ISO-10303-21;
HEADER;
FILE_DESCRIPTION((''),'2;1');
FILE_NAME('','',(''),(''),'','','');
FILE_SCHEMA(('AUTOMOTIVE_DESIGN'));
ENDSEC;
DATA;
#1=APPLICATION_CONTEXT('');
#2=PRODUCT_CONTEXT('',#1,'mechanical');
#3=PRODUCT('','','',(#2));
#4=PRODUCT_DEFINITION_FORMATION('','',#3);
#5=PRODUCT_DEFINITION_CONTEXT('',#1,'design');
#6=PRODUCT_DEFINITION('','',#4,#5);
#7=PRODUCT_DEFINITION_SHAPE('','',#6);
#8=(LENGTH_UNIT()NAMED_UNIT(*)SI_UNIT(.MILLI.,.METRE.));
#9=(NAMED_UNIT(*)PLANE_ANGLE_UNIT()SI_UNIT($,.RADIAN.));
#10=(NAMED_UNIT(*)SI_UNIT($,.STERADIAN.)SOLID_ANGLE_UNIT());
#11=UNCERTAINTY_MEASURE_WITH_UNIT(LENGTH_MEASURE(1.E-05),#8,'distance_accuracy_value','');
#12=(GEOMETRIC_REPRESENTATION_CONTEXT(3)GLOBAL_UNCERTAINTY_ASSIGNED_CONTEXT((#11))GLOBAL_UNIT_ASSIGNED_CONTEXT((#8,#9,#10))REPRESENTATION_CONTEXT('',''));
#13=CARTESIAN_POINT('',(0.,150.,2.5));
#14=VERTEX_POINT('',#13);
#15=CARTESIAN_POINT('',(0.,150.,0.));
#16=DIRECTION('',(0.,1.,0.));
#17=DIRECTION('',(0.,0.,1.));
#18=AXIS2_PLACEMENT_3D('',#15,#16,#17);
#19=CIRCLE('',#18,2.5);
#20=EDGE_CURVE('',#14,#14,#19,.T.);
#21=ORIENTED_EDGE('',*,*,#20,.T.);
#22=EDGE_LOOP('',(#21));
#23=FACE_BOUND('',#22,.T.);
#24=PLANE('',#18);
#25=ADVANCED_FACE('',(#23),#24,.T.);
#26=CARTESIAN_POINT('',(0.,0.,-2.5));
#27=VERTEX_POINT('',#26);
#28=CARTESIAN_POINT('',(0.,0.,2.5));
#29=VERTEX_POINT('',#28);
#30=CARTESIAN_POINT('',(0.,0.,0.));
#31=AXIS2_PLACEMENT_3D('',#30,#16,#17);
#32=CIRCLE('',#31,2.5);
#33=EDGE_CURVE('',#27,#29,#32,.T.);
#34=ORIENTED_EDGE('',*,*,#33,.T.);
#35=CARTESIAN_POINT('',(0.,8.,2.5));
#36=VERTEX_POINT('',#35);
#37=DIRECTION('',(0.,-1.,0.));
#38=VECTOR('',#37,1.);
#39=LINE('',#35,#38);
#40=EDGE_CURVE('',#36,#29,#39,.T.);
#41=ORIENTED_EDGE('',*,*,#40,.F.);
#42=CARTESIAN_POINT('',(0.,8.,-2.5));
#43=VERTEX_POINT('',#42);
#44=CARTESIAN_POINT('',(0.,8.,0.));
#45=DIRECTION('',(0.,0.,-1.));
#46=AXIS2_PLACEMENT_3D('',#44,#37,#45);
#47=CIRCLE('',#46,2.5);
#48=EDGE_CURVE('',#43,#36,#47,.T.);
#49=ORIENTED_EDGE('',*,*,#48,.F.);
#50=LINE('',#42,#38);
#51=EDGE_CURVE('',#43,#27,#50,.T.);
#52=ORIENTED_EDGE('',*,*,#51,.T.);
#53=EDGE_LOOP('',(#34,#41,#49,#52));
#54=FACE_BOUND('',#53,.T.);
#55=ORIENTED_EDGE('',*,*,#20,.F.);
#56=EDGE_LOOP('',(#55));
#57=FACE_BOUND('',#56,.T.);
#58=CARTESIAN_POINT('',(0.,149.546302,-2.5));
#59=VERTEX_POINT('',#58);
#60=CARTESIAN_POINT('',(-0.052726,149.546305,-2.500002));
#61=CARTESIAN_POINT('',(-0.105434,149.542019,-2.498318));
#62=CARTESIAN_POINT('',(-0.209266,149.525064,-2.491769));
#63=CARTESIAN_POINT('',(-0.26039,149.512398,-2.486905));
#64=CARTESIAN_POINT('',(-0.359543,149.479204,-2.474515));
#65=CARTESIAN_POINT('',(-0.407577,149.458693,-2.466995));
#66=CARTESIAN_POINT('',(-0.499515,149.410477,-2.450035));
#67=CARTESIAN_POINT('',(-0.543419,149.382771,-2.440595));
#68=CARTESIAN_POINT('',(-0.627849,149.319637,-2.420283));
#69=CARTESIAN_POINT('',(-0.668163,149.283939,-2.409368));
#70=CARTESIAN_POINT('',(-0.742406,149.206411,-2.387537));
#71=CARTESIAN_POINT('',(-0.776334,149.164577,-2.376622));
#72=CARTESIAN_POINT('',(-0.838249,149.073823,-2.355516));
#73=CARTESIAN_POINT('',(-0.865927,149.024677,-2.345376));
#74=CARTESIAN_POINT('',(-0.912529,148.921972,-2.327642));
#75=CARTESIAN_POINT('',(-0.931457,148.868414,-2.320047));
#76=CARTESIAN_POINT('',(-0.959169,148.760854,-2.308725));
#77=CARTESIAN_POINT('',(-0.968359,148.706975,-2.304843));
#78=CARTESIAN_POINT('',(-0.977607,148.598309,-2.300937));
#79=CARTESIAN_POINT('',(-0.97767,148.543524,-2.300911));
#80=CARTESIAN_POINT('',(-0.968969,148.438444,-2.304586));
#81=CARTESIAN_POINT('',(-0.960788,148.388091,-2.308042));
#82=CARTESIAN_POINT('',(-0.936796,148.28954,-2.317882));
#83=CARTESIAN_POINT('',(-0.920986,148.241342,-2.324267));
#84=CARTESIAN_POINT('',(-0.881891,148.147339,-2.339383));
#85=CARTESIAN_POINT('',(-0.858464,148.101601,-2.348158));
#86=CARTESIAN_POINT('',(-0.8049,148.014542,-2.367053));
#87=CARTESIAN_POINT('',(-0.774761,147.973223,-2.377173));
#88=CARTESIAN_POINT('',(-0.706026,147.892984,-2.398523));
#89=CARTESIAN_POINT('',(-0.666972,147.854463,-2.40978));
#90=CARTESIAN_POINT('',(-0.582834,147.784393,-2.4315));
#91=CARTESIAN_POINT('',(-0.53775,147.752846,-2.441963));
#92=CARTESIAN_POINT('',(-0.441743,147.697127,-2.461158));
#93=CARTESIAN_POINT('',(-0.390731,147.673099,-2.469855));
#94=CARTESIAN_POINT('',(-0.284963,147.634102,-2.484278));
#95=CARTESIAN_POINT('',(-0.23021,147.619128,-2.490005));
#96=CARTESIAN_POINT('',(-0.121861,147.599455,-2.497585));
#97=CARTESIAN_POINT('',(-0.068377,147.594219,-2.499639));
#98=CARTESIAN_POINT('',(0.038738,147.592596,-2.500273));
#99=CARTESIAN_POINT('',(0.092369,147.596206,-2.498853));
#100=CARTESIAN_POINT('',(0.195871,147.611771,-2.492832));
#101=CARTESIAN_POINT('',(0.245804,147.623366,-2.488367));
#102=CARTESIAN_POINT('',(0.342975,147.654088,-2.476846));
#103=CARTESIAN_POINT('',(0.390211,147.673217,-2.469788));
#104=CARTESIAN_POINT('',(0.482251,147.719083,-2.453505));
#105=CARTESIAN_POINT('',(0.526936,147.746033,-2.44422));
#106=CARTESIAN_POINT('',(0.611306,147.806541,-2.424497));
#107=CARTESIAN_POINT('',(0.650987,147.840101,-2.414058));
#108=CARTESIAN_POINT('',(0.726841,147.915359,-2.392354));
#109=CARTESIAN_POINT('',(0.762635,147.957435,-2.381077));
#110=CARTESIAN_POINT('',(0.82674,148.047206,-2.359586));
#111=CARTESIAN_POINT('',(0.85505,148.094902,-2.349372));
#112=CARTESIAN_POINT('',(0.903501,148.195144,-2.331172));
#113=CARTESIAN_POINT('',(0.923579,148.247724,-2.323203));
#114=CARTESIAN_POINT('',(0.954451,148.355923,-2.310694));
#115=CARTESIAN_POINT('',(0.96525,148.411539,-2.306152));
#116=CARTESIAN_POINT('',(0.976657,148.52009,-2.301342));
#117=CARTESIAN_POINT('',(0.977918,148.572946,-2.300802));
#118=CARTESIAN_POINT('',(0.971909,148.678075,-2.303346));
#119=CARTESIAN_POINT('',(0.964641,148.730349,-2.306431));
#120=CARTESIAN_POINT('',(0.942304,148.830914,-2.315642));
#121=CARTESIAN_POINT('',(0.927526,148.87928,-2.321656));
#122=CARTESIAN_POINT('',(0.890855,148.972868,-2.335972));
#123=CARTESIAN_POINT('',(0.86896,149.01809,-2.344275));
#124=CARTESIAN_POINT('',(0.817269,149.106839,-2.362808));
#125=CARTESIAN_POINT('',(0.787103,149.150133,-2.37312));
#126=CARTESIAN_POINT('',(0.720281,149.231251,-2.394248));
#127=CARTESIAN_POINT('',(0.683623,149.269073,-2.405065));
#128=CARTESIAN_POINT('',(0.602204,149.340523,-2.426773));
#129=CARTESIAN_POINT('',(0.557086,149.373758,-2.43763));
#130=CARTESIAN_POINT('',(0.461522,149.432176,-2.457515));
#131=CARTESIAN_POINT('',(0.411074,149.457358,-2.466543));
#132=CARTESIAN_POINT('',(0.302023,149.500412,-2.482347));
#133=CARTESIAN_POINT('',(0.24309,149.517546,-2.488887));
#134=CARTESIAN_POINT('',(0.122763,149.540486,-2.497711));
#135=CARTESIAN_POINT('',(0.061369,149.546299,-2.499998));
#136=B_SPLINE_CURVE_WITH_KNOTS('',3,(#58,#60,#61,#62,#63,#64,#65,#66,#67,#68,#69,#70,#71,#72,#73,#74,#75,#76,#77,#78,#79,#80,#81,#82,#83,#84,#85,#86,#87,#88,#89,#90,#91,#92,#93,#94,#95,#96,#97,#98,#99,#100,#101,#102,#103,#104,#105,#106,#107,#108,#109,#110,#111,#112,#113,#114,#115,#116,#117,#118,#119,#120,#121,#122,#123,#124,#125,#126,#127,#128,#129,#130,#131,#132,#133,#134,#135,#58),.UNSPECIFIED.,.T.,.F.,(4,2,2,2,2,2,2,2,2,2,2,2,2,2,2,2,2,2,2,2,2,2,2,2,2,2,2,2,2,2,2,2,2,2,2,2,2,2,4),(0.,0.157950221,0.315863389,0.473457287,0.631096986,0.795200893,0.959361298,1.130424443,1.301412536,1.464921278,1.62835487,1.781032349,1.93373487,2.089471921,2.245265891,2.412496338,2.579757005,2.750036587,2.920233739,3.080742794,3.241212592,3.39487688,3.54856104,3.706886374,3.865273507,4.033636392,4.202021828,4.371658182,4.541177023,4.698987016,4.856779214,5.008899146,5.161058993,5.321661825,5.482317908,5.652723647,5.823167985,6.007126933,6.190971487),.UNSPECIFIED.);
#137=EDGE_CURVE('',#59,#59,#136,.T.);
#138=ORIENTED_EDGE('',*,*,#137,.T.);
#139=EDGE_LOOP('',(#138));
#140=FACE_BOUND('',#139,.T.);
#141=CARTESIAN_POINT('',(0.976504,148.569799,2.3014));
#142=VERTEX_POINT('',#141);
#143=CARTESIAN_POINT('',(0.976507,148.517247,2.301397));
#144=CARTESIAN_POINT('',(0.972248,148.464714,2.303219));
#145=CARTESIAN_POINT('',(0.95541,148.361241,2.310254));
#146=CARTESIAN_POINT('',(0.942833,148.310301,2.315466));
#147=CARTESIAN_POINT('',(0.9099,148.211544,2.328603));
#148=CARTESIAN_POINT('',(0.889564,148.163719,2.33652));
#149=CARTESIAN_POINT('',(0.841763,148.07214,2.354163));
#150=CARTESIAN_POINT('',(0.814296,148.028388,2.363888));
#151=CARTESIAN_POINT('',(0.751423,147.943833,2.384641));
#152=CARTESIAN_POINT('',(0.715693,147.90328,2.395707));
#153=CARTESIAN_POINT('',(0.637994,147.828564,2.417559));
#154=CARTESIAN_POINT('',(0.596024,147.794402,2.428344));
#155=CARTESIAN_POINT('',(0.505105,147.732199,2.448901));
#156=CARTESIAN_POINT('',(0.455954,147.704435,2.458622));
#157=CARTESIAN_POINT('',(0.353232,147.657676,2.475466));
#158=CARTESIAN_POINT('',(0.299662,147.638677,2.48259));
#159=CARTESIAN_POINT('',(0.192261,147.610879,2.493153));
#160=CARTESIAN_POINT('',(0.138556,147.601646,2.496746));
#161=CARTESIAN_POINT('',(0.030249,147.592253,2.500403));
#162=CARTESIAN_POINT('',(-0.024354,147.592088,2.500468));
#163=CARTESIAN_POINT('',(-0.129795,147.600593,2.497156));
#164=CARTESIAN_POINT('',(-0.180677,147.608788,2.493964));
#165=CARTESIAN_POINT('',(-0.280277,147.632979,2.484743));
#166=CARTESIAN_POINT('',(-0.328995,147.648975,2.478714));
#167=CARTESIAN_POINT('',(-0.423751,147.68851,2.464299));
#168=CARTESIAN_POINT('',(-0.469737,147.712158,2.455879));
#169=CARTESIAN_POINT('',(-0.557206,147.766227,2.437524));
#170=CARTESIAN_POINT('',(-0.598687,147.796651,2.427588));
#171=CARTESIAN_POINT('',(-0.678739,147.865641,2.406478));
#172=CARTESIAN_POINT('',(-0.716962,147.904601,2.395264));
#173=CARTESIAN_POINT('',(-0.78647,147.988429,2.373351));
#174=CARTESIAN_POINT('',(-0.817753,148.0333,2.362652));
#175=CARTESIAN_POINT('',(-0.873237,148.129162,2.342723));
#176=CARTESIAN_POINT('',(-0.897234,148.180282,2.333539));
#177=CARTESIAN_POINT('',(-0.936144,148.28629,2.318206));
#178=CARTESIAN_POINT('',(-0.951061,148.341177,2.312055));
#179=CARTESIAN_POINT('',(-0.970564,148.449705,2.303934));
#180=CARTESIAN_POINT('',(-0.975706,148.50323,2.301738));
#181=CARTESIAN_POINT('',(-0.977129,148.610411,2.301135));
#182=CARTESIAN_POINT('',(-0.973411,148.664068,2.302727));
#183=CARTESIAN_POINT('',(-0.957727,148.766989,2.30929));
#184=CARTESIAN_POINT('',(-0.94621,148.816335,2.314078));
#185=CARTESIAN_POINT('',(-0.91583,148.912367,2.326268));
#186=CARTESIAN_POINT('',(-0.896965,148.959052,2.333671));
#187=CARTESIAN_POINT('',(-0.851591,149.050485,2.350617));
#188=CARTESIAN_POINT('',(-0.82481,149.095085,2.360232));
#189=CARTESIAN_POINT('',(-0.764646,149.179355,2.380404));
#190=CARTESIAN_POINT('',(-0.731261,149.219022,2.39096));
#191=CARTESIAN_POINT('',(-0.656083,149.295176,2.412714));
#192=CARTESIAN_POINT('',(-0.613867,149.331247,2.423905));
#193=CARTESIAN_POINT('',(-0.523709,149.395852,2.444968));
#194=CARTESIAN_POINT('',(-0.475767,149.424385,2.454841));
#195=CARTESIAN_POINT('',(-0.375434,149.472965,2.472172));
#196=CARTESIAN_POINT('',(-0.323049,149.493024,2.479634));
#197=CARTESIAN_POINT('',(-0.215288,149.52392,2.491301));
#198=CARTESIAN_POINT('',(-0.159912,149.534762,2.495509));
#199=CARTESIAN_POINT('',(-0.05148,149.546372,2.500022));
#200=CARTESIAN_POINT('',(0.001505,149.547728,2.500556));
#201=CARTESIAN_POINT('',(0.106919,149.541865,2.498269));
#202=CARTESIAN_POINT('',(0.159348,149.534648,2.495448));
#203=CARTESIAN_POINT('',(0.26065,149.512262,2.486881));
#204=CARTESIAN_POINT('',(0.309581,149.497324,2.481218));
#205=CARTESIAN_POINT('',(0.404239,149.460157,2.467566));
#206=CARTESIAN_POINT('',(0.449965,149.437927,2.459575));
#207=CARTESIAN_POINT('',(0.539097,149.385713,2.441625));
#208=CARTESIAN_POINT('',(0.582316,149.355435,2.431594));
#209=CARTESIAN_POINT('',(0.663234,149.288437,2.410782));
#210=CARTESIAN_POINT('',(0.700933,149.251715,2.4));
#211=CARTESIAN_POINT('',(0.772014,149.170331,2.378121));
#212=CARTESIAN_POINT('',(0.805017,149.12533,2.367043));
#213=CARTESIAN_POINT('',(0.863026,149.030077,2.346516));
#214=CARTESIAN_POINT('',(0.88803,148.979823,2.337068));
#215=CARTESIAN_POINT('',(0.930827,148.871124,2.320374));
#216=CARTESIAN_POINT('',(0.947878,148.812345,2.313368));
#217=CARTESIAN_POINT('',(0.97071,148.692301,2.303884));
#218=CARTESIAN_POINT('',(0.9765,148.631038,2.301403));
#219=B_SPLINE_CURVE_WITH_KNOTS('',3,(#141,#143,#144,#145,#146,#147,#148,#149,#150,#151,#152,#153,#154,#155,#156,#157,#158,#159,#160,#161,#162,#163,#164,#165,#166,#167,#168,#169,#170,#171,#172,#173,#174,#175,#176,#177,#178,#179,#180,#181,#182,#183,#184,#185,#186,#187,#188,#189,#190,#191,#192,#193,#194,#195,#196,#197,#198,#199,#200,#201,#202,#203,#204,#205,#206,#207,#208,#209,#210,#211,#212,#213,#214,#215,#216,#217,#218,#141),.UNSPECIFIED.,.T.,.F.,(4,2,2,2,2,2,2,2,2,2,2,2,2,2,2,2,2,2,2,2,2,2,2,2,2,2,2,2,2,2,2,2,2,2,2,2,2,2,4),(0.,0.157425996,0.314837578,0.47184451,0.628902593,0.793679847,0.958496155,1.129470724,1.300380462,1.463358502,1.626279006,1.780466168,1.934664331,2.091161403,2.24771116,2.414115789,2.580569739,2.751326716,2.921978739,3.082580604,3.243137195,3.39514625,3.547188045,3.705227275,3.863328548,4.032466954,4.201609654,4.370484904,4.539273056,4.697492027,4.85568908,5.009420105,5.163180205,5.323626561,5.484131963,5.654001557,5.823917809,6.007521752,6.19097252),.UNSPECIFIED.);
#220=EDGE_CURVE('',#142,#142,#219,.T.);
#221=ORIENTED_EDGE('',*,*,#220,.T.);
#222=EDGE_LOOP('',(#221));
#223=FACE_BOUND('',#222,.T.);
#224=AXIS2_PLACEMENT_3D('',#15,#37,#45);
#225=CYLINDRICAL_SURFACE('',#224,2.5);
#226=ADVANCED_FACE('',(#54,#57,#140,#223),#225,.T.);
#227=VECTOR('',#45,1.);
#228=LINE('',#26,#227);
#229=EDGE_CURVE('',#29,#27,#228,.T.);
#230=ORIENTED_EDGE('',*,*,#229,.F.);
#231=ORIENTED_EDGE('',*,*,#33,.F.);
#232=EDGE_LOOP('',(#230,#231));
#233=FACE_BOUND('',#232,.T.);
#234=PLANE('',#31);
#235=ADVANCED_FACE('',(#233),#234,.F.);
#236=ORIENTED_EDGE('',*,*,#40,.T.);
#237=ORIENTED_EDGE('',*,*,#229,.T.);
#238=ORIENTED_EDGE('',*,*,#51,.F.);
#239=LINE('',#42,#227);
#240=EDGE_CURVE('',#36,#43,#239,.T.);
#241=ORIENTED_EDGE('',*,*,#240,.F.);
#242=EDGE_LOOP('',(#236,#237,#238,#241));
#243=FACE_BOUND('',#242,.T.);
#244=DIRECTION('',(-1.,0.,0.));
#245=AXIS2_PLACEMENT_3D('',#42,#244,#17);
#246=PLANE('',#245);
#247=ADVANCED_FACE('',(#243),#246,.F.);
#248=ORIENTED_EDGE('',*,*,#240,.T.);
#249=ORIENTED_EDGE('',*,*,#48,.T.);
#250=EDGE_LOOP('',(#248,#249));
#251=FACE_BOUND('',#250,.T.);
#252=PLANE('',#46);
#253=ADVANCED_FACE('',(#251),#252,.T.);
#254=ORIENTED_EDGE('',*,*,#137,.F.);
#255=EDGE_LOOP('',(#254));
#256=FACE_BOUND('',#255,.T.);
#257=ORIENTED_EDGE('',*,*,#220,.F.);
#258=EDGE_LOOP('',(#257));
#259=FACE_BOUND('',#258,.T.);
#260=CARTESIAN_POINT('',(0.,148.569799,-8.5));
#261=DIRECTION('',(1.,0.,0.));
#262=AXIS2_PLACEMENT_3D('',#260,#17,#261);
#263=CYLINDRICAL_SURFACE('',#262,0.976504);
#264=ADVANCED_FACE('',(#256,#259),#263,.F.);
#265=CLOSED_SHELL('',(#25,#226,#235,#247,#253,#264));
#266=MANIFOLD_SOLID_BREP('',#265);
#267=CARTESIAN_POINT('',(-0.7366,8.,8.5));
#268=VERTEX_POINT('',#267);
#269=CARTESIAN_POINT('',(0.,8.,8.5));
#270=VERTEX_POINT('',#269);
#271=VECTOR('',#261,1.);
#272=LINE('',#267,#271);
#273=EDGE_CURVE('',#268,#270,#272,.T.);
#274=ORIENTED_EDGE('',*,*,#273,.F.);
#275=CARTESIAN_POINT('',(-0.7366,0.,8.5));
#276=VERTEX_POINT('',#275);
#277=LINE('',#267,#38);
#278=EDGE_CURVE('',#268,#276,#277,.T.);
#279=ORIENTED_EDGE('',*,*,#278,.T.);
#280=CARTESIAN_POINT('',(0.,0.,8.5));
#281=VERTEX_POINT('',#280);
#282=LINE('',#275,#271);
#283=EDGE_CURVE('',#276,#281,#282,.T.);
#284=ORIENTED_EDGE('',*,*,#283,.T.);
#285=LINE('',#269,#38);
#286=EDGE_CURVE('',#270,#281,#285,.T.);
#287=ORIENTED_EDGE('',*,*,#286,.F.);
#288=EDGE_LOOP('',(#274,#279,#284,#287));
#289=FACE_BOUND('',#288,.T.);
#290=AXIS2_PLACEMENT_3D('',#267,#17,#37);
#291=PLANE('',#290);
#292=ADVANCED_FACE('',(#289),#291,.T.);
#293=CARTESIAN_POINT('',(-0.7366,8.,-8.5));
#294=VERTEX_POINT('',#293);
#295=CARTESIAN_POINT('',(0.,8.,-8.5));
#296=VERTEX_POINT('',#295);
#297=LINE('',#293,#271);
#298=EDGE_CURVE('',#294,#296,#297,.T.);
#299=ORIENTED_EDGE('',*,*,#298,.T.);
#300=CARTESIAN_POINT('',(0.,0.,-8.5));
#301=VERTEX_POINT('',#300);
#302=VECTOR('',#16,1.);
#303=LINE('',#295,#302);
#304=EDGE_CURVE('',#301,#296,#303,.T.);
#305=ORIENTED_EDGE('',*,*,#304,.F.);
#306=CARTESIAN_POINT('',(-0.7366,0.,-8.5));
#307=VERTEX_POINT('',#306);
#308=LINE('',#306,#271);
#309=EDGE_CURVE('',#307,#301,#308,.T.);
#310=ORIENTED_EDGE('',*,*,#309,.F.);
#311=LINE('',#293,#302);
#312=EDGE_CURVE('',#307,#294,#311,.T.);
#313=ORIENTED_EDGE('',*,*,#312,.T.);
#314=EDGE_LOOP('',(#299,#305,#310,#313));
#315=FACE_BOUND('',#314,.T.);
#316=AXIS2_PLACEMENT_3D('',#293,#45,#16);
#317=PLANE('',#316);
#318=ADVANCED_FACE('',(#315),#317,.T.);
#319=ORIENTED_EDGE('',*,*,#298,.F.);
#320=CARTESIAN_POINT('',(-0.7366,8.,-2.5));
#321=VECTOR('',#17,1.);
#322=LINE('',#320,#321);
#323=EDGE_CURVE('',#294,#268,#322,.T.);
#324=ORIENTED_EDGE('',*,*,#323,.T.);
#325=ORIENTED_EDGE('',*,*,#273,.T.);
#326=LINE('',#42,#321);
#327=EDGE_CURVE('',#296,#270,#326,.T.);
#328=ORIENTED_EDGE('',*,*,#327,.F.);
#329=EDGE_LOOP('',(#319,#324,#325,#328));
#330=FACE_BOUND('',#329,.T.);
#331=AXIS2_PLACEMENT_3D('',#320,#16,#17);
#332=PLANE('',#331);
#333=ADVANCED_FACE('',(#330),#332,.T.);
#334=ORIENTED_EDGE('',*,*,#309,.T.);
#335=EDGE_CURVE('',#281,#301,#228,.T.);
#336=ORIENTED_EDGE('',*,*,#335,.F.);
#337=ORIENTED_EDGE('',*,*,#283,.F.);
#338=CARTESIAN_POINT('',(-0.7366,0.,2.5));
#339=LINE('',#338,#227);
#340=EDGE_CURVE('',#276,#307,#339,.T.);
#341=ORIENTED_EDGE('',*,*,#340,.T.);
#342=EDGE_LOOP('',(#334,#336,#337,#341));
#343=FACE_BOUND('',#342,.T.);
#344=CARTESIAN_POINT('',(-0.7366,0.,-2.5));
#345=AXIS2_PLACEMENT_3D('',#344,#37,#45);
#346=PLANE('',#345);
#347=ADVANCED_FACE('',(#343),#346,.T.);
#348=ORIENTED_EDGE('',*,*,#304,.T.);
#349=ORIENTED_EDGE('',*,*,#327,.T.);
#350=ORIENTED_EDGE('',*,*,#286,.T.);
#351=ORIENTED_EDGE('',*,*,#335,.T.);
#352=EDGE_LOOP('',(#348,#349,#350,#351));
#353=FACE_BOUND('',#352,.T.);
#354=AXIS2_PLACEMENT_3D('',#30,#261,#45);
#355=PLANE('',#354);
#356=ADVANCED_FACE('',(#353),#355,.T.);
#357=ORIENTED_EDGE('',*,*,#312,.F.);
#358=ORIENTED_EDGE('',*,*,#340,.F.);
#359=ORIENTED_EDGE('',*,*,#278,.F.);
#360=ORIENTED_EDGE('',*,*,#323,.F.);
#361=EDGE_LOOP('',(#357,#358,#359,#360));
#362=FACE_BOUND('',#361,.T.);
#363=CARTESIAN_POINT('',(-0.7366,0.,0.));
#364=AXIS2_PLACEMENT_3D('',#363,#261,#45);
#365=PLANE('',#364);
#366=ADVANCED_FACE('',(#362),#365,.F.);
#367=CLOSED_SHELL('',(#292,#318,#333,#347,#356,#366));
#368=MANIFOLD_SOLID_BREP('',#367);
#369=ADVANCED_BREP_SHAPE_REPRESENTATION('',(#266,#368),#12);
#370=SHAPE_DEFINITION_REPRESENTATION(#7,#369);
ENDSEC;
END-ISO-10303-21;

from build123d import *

# Parameters (mm, degrees)
SKETCH1_R               = 2.5
BOSS_EXTRUDE1_DEPTH     = 150
CUT_EXTRUDE1_DEPTH      = 8
BASE_FLANGE1_DEPTH      = 0.7366
CUT_EXTRUDE2_DEPTH      = 151.261438832
CUT_EXTRUDE2_DEPTH_BACK = 151.261438832
SKETCH9_R               = 0.976503682


# Sheet-metal steps are written as plain solids
with BuildPart() as part:
    # Sketch1 → Boss-Extrude1 (new body)
    with BuildSketch(Plane(origin=(0, 0, 0), x_dir=(1, 0, 0), z_dir=(0, 1, 0))):
        with Locations(Location((0, 0, 0), (0, 0, 270))):
            Circle(SKETCH1_R)
    extrude(amount=BOSS_EXTRUDE1_DEPTH)

    # Sketch2 → Cut-Extrude1 (cut)
    with BuildSketch(Plane.XZ):
        with BuildLine():
            Line((0, -2.5), (0, 2.5))
            ThreePointArc((0, 2.5), (2.5, 0), (0, -2.5))
        make_face()
    extrude(amount=-CUT_EXTRUDE1_DEPTH, mode=Mode.SUBTRACT)

    # Sketch9 → Cut-Extrude2 (cut, two sides: drawn at the far end of the back side and taken through both)
    with BuildSketch(Plane.XY.offset(-CUT_EXTRUDE2_DEPTH_BACK)):
        with Locations((0, 148.569798757)):
            Circle(SKETCH9_R)
    extrude(amount=CUT_EXTRUDE2_DEPTH + CUT_EXTRUDE2_DEPTH_BACK, mode=Mode.SUBTRACT)


with BuildPart() as body_2:
    # Sketch4 → Base-Flange1 (new body)
    with BuildSketch(Plane(origin=(0, 0, 0), x_dir=(0, 0, -1), z_dir=(1, 0, 0))):
        Polygon((-2.5, 8), (-8.5, 8), (-8.5, 0), (-2.5, 0), (2.5, 0), (8.5, 0), (8.5, 8), (2.5, 8), align=None)
    extrude(amount=-BASE_FLANGE1_DEPTH)


solid = Compound([part.part, body_2.part])
